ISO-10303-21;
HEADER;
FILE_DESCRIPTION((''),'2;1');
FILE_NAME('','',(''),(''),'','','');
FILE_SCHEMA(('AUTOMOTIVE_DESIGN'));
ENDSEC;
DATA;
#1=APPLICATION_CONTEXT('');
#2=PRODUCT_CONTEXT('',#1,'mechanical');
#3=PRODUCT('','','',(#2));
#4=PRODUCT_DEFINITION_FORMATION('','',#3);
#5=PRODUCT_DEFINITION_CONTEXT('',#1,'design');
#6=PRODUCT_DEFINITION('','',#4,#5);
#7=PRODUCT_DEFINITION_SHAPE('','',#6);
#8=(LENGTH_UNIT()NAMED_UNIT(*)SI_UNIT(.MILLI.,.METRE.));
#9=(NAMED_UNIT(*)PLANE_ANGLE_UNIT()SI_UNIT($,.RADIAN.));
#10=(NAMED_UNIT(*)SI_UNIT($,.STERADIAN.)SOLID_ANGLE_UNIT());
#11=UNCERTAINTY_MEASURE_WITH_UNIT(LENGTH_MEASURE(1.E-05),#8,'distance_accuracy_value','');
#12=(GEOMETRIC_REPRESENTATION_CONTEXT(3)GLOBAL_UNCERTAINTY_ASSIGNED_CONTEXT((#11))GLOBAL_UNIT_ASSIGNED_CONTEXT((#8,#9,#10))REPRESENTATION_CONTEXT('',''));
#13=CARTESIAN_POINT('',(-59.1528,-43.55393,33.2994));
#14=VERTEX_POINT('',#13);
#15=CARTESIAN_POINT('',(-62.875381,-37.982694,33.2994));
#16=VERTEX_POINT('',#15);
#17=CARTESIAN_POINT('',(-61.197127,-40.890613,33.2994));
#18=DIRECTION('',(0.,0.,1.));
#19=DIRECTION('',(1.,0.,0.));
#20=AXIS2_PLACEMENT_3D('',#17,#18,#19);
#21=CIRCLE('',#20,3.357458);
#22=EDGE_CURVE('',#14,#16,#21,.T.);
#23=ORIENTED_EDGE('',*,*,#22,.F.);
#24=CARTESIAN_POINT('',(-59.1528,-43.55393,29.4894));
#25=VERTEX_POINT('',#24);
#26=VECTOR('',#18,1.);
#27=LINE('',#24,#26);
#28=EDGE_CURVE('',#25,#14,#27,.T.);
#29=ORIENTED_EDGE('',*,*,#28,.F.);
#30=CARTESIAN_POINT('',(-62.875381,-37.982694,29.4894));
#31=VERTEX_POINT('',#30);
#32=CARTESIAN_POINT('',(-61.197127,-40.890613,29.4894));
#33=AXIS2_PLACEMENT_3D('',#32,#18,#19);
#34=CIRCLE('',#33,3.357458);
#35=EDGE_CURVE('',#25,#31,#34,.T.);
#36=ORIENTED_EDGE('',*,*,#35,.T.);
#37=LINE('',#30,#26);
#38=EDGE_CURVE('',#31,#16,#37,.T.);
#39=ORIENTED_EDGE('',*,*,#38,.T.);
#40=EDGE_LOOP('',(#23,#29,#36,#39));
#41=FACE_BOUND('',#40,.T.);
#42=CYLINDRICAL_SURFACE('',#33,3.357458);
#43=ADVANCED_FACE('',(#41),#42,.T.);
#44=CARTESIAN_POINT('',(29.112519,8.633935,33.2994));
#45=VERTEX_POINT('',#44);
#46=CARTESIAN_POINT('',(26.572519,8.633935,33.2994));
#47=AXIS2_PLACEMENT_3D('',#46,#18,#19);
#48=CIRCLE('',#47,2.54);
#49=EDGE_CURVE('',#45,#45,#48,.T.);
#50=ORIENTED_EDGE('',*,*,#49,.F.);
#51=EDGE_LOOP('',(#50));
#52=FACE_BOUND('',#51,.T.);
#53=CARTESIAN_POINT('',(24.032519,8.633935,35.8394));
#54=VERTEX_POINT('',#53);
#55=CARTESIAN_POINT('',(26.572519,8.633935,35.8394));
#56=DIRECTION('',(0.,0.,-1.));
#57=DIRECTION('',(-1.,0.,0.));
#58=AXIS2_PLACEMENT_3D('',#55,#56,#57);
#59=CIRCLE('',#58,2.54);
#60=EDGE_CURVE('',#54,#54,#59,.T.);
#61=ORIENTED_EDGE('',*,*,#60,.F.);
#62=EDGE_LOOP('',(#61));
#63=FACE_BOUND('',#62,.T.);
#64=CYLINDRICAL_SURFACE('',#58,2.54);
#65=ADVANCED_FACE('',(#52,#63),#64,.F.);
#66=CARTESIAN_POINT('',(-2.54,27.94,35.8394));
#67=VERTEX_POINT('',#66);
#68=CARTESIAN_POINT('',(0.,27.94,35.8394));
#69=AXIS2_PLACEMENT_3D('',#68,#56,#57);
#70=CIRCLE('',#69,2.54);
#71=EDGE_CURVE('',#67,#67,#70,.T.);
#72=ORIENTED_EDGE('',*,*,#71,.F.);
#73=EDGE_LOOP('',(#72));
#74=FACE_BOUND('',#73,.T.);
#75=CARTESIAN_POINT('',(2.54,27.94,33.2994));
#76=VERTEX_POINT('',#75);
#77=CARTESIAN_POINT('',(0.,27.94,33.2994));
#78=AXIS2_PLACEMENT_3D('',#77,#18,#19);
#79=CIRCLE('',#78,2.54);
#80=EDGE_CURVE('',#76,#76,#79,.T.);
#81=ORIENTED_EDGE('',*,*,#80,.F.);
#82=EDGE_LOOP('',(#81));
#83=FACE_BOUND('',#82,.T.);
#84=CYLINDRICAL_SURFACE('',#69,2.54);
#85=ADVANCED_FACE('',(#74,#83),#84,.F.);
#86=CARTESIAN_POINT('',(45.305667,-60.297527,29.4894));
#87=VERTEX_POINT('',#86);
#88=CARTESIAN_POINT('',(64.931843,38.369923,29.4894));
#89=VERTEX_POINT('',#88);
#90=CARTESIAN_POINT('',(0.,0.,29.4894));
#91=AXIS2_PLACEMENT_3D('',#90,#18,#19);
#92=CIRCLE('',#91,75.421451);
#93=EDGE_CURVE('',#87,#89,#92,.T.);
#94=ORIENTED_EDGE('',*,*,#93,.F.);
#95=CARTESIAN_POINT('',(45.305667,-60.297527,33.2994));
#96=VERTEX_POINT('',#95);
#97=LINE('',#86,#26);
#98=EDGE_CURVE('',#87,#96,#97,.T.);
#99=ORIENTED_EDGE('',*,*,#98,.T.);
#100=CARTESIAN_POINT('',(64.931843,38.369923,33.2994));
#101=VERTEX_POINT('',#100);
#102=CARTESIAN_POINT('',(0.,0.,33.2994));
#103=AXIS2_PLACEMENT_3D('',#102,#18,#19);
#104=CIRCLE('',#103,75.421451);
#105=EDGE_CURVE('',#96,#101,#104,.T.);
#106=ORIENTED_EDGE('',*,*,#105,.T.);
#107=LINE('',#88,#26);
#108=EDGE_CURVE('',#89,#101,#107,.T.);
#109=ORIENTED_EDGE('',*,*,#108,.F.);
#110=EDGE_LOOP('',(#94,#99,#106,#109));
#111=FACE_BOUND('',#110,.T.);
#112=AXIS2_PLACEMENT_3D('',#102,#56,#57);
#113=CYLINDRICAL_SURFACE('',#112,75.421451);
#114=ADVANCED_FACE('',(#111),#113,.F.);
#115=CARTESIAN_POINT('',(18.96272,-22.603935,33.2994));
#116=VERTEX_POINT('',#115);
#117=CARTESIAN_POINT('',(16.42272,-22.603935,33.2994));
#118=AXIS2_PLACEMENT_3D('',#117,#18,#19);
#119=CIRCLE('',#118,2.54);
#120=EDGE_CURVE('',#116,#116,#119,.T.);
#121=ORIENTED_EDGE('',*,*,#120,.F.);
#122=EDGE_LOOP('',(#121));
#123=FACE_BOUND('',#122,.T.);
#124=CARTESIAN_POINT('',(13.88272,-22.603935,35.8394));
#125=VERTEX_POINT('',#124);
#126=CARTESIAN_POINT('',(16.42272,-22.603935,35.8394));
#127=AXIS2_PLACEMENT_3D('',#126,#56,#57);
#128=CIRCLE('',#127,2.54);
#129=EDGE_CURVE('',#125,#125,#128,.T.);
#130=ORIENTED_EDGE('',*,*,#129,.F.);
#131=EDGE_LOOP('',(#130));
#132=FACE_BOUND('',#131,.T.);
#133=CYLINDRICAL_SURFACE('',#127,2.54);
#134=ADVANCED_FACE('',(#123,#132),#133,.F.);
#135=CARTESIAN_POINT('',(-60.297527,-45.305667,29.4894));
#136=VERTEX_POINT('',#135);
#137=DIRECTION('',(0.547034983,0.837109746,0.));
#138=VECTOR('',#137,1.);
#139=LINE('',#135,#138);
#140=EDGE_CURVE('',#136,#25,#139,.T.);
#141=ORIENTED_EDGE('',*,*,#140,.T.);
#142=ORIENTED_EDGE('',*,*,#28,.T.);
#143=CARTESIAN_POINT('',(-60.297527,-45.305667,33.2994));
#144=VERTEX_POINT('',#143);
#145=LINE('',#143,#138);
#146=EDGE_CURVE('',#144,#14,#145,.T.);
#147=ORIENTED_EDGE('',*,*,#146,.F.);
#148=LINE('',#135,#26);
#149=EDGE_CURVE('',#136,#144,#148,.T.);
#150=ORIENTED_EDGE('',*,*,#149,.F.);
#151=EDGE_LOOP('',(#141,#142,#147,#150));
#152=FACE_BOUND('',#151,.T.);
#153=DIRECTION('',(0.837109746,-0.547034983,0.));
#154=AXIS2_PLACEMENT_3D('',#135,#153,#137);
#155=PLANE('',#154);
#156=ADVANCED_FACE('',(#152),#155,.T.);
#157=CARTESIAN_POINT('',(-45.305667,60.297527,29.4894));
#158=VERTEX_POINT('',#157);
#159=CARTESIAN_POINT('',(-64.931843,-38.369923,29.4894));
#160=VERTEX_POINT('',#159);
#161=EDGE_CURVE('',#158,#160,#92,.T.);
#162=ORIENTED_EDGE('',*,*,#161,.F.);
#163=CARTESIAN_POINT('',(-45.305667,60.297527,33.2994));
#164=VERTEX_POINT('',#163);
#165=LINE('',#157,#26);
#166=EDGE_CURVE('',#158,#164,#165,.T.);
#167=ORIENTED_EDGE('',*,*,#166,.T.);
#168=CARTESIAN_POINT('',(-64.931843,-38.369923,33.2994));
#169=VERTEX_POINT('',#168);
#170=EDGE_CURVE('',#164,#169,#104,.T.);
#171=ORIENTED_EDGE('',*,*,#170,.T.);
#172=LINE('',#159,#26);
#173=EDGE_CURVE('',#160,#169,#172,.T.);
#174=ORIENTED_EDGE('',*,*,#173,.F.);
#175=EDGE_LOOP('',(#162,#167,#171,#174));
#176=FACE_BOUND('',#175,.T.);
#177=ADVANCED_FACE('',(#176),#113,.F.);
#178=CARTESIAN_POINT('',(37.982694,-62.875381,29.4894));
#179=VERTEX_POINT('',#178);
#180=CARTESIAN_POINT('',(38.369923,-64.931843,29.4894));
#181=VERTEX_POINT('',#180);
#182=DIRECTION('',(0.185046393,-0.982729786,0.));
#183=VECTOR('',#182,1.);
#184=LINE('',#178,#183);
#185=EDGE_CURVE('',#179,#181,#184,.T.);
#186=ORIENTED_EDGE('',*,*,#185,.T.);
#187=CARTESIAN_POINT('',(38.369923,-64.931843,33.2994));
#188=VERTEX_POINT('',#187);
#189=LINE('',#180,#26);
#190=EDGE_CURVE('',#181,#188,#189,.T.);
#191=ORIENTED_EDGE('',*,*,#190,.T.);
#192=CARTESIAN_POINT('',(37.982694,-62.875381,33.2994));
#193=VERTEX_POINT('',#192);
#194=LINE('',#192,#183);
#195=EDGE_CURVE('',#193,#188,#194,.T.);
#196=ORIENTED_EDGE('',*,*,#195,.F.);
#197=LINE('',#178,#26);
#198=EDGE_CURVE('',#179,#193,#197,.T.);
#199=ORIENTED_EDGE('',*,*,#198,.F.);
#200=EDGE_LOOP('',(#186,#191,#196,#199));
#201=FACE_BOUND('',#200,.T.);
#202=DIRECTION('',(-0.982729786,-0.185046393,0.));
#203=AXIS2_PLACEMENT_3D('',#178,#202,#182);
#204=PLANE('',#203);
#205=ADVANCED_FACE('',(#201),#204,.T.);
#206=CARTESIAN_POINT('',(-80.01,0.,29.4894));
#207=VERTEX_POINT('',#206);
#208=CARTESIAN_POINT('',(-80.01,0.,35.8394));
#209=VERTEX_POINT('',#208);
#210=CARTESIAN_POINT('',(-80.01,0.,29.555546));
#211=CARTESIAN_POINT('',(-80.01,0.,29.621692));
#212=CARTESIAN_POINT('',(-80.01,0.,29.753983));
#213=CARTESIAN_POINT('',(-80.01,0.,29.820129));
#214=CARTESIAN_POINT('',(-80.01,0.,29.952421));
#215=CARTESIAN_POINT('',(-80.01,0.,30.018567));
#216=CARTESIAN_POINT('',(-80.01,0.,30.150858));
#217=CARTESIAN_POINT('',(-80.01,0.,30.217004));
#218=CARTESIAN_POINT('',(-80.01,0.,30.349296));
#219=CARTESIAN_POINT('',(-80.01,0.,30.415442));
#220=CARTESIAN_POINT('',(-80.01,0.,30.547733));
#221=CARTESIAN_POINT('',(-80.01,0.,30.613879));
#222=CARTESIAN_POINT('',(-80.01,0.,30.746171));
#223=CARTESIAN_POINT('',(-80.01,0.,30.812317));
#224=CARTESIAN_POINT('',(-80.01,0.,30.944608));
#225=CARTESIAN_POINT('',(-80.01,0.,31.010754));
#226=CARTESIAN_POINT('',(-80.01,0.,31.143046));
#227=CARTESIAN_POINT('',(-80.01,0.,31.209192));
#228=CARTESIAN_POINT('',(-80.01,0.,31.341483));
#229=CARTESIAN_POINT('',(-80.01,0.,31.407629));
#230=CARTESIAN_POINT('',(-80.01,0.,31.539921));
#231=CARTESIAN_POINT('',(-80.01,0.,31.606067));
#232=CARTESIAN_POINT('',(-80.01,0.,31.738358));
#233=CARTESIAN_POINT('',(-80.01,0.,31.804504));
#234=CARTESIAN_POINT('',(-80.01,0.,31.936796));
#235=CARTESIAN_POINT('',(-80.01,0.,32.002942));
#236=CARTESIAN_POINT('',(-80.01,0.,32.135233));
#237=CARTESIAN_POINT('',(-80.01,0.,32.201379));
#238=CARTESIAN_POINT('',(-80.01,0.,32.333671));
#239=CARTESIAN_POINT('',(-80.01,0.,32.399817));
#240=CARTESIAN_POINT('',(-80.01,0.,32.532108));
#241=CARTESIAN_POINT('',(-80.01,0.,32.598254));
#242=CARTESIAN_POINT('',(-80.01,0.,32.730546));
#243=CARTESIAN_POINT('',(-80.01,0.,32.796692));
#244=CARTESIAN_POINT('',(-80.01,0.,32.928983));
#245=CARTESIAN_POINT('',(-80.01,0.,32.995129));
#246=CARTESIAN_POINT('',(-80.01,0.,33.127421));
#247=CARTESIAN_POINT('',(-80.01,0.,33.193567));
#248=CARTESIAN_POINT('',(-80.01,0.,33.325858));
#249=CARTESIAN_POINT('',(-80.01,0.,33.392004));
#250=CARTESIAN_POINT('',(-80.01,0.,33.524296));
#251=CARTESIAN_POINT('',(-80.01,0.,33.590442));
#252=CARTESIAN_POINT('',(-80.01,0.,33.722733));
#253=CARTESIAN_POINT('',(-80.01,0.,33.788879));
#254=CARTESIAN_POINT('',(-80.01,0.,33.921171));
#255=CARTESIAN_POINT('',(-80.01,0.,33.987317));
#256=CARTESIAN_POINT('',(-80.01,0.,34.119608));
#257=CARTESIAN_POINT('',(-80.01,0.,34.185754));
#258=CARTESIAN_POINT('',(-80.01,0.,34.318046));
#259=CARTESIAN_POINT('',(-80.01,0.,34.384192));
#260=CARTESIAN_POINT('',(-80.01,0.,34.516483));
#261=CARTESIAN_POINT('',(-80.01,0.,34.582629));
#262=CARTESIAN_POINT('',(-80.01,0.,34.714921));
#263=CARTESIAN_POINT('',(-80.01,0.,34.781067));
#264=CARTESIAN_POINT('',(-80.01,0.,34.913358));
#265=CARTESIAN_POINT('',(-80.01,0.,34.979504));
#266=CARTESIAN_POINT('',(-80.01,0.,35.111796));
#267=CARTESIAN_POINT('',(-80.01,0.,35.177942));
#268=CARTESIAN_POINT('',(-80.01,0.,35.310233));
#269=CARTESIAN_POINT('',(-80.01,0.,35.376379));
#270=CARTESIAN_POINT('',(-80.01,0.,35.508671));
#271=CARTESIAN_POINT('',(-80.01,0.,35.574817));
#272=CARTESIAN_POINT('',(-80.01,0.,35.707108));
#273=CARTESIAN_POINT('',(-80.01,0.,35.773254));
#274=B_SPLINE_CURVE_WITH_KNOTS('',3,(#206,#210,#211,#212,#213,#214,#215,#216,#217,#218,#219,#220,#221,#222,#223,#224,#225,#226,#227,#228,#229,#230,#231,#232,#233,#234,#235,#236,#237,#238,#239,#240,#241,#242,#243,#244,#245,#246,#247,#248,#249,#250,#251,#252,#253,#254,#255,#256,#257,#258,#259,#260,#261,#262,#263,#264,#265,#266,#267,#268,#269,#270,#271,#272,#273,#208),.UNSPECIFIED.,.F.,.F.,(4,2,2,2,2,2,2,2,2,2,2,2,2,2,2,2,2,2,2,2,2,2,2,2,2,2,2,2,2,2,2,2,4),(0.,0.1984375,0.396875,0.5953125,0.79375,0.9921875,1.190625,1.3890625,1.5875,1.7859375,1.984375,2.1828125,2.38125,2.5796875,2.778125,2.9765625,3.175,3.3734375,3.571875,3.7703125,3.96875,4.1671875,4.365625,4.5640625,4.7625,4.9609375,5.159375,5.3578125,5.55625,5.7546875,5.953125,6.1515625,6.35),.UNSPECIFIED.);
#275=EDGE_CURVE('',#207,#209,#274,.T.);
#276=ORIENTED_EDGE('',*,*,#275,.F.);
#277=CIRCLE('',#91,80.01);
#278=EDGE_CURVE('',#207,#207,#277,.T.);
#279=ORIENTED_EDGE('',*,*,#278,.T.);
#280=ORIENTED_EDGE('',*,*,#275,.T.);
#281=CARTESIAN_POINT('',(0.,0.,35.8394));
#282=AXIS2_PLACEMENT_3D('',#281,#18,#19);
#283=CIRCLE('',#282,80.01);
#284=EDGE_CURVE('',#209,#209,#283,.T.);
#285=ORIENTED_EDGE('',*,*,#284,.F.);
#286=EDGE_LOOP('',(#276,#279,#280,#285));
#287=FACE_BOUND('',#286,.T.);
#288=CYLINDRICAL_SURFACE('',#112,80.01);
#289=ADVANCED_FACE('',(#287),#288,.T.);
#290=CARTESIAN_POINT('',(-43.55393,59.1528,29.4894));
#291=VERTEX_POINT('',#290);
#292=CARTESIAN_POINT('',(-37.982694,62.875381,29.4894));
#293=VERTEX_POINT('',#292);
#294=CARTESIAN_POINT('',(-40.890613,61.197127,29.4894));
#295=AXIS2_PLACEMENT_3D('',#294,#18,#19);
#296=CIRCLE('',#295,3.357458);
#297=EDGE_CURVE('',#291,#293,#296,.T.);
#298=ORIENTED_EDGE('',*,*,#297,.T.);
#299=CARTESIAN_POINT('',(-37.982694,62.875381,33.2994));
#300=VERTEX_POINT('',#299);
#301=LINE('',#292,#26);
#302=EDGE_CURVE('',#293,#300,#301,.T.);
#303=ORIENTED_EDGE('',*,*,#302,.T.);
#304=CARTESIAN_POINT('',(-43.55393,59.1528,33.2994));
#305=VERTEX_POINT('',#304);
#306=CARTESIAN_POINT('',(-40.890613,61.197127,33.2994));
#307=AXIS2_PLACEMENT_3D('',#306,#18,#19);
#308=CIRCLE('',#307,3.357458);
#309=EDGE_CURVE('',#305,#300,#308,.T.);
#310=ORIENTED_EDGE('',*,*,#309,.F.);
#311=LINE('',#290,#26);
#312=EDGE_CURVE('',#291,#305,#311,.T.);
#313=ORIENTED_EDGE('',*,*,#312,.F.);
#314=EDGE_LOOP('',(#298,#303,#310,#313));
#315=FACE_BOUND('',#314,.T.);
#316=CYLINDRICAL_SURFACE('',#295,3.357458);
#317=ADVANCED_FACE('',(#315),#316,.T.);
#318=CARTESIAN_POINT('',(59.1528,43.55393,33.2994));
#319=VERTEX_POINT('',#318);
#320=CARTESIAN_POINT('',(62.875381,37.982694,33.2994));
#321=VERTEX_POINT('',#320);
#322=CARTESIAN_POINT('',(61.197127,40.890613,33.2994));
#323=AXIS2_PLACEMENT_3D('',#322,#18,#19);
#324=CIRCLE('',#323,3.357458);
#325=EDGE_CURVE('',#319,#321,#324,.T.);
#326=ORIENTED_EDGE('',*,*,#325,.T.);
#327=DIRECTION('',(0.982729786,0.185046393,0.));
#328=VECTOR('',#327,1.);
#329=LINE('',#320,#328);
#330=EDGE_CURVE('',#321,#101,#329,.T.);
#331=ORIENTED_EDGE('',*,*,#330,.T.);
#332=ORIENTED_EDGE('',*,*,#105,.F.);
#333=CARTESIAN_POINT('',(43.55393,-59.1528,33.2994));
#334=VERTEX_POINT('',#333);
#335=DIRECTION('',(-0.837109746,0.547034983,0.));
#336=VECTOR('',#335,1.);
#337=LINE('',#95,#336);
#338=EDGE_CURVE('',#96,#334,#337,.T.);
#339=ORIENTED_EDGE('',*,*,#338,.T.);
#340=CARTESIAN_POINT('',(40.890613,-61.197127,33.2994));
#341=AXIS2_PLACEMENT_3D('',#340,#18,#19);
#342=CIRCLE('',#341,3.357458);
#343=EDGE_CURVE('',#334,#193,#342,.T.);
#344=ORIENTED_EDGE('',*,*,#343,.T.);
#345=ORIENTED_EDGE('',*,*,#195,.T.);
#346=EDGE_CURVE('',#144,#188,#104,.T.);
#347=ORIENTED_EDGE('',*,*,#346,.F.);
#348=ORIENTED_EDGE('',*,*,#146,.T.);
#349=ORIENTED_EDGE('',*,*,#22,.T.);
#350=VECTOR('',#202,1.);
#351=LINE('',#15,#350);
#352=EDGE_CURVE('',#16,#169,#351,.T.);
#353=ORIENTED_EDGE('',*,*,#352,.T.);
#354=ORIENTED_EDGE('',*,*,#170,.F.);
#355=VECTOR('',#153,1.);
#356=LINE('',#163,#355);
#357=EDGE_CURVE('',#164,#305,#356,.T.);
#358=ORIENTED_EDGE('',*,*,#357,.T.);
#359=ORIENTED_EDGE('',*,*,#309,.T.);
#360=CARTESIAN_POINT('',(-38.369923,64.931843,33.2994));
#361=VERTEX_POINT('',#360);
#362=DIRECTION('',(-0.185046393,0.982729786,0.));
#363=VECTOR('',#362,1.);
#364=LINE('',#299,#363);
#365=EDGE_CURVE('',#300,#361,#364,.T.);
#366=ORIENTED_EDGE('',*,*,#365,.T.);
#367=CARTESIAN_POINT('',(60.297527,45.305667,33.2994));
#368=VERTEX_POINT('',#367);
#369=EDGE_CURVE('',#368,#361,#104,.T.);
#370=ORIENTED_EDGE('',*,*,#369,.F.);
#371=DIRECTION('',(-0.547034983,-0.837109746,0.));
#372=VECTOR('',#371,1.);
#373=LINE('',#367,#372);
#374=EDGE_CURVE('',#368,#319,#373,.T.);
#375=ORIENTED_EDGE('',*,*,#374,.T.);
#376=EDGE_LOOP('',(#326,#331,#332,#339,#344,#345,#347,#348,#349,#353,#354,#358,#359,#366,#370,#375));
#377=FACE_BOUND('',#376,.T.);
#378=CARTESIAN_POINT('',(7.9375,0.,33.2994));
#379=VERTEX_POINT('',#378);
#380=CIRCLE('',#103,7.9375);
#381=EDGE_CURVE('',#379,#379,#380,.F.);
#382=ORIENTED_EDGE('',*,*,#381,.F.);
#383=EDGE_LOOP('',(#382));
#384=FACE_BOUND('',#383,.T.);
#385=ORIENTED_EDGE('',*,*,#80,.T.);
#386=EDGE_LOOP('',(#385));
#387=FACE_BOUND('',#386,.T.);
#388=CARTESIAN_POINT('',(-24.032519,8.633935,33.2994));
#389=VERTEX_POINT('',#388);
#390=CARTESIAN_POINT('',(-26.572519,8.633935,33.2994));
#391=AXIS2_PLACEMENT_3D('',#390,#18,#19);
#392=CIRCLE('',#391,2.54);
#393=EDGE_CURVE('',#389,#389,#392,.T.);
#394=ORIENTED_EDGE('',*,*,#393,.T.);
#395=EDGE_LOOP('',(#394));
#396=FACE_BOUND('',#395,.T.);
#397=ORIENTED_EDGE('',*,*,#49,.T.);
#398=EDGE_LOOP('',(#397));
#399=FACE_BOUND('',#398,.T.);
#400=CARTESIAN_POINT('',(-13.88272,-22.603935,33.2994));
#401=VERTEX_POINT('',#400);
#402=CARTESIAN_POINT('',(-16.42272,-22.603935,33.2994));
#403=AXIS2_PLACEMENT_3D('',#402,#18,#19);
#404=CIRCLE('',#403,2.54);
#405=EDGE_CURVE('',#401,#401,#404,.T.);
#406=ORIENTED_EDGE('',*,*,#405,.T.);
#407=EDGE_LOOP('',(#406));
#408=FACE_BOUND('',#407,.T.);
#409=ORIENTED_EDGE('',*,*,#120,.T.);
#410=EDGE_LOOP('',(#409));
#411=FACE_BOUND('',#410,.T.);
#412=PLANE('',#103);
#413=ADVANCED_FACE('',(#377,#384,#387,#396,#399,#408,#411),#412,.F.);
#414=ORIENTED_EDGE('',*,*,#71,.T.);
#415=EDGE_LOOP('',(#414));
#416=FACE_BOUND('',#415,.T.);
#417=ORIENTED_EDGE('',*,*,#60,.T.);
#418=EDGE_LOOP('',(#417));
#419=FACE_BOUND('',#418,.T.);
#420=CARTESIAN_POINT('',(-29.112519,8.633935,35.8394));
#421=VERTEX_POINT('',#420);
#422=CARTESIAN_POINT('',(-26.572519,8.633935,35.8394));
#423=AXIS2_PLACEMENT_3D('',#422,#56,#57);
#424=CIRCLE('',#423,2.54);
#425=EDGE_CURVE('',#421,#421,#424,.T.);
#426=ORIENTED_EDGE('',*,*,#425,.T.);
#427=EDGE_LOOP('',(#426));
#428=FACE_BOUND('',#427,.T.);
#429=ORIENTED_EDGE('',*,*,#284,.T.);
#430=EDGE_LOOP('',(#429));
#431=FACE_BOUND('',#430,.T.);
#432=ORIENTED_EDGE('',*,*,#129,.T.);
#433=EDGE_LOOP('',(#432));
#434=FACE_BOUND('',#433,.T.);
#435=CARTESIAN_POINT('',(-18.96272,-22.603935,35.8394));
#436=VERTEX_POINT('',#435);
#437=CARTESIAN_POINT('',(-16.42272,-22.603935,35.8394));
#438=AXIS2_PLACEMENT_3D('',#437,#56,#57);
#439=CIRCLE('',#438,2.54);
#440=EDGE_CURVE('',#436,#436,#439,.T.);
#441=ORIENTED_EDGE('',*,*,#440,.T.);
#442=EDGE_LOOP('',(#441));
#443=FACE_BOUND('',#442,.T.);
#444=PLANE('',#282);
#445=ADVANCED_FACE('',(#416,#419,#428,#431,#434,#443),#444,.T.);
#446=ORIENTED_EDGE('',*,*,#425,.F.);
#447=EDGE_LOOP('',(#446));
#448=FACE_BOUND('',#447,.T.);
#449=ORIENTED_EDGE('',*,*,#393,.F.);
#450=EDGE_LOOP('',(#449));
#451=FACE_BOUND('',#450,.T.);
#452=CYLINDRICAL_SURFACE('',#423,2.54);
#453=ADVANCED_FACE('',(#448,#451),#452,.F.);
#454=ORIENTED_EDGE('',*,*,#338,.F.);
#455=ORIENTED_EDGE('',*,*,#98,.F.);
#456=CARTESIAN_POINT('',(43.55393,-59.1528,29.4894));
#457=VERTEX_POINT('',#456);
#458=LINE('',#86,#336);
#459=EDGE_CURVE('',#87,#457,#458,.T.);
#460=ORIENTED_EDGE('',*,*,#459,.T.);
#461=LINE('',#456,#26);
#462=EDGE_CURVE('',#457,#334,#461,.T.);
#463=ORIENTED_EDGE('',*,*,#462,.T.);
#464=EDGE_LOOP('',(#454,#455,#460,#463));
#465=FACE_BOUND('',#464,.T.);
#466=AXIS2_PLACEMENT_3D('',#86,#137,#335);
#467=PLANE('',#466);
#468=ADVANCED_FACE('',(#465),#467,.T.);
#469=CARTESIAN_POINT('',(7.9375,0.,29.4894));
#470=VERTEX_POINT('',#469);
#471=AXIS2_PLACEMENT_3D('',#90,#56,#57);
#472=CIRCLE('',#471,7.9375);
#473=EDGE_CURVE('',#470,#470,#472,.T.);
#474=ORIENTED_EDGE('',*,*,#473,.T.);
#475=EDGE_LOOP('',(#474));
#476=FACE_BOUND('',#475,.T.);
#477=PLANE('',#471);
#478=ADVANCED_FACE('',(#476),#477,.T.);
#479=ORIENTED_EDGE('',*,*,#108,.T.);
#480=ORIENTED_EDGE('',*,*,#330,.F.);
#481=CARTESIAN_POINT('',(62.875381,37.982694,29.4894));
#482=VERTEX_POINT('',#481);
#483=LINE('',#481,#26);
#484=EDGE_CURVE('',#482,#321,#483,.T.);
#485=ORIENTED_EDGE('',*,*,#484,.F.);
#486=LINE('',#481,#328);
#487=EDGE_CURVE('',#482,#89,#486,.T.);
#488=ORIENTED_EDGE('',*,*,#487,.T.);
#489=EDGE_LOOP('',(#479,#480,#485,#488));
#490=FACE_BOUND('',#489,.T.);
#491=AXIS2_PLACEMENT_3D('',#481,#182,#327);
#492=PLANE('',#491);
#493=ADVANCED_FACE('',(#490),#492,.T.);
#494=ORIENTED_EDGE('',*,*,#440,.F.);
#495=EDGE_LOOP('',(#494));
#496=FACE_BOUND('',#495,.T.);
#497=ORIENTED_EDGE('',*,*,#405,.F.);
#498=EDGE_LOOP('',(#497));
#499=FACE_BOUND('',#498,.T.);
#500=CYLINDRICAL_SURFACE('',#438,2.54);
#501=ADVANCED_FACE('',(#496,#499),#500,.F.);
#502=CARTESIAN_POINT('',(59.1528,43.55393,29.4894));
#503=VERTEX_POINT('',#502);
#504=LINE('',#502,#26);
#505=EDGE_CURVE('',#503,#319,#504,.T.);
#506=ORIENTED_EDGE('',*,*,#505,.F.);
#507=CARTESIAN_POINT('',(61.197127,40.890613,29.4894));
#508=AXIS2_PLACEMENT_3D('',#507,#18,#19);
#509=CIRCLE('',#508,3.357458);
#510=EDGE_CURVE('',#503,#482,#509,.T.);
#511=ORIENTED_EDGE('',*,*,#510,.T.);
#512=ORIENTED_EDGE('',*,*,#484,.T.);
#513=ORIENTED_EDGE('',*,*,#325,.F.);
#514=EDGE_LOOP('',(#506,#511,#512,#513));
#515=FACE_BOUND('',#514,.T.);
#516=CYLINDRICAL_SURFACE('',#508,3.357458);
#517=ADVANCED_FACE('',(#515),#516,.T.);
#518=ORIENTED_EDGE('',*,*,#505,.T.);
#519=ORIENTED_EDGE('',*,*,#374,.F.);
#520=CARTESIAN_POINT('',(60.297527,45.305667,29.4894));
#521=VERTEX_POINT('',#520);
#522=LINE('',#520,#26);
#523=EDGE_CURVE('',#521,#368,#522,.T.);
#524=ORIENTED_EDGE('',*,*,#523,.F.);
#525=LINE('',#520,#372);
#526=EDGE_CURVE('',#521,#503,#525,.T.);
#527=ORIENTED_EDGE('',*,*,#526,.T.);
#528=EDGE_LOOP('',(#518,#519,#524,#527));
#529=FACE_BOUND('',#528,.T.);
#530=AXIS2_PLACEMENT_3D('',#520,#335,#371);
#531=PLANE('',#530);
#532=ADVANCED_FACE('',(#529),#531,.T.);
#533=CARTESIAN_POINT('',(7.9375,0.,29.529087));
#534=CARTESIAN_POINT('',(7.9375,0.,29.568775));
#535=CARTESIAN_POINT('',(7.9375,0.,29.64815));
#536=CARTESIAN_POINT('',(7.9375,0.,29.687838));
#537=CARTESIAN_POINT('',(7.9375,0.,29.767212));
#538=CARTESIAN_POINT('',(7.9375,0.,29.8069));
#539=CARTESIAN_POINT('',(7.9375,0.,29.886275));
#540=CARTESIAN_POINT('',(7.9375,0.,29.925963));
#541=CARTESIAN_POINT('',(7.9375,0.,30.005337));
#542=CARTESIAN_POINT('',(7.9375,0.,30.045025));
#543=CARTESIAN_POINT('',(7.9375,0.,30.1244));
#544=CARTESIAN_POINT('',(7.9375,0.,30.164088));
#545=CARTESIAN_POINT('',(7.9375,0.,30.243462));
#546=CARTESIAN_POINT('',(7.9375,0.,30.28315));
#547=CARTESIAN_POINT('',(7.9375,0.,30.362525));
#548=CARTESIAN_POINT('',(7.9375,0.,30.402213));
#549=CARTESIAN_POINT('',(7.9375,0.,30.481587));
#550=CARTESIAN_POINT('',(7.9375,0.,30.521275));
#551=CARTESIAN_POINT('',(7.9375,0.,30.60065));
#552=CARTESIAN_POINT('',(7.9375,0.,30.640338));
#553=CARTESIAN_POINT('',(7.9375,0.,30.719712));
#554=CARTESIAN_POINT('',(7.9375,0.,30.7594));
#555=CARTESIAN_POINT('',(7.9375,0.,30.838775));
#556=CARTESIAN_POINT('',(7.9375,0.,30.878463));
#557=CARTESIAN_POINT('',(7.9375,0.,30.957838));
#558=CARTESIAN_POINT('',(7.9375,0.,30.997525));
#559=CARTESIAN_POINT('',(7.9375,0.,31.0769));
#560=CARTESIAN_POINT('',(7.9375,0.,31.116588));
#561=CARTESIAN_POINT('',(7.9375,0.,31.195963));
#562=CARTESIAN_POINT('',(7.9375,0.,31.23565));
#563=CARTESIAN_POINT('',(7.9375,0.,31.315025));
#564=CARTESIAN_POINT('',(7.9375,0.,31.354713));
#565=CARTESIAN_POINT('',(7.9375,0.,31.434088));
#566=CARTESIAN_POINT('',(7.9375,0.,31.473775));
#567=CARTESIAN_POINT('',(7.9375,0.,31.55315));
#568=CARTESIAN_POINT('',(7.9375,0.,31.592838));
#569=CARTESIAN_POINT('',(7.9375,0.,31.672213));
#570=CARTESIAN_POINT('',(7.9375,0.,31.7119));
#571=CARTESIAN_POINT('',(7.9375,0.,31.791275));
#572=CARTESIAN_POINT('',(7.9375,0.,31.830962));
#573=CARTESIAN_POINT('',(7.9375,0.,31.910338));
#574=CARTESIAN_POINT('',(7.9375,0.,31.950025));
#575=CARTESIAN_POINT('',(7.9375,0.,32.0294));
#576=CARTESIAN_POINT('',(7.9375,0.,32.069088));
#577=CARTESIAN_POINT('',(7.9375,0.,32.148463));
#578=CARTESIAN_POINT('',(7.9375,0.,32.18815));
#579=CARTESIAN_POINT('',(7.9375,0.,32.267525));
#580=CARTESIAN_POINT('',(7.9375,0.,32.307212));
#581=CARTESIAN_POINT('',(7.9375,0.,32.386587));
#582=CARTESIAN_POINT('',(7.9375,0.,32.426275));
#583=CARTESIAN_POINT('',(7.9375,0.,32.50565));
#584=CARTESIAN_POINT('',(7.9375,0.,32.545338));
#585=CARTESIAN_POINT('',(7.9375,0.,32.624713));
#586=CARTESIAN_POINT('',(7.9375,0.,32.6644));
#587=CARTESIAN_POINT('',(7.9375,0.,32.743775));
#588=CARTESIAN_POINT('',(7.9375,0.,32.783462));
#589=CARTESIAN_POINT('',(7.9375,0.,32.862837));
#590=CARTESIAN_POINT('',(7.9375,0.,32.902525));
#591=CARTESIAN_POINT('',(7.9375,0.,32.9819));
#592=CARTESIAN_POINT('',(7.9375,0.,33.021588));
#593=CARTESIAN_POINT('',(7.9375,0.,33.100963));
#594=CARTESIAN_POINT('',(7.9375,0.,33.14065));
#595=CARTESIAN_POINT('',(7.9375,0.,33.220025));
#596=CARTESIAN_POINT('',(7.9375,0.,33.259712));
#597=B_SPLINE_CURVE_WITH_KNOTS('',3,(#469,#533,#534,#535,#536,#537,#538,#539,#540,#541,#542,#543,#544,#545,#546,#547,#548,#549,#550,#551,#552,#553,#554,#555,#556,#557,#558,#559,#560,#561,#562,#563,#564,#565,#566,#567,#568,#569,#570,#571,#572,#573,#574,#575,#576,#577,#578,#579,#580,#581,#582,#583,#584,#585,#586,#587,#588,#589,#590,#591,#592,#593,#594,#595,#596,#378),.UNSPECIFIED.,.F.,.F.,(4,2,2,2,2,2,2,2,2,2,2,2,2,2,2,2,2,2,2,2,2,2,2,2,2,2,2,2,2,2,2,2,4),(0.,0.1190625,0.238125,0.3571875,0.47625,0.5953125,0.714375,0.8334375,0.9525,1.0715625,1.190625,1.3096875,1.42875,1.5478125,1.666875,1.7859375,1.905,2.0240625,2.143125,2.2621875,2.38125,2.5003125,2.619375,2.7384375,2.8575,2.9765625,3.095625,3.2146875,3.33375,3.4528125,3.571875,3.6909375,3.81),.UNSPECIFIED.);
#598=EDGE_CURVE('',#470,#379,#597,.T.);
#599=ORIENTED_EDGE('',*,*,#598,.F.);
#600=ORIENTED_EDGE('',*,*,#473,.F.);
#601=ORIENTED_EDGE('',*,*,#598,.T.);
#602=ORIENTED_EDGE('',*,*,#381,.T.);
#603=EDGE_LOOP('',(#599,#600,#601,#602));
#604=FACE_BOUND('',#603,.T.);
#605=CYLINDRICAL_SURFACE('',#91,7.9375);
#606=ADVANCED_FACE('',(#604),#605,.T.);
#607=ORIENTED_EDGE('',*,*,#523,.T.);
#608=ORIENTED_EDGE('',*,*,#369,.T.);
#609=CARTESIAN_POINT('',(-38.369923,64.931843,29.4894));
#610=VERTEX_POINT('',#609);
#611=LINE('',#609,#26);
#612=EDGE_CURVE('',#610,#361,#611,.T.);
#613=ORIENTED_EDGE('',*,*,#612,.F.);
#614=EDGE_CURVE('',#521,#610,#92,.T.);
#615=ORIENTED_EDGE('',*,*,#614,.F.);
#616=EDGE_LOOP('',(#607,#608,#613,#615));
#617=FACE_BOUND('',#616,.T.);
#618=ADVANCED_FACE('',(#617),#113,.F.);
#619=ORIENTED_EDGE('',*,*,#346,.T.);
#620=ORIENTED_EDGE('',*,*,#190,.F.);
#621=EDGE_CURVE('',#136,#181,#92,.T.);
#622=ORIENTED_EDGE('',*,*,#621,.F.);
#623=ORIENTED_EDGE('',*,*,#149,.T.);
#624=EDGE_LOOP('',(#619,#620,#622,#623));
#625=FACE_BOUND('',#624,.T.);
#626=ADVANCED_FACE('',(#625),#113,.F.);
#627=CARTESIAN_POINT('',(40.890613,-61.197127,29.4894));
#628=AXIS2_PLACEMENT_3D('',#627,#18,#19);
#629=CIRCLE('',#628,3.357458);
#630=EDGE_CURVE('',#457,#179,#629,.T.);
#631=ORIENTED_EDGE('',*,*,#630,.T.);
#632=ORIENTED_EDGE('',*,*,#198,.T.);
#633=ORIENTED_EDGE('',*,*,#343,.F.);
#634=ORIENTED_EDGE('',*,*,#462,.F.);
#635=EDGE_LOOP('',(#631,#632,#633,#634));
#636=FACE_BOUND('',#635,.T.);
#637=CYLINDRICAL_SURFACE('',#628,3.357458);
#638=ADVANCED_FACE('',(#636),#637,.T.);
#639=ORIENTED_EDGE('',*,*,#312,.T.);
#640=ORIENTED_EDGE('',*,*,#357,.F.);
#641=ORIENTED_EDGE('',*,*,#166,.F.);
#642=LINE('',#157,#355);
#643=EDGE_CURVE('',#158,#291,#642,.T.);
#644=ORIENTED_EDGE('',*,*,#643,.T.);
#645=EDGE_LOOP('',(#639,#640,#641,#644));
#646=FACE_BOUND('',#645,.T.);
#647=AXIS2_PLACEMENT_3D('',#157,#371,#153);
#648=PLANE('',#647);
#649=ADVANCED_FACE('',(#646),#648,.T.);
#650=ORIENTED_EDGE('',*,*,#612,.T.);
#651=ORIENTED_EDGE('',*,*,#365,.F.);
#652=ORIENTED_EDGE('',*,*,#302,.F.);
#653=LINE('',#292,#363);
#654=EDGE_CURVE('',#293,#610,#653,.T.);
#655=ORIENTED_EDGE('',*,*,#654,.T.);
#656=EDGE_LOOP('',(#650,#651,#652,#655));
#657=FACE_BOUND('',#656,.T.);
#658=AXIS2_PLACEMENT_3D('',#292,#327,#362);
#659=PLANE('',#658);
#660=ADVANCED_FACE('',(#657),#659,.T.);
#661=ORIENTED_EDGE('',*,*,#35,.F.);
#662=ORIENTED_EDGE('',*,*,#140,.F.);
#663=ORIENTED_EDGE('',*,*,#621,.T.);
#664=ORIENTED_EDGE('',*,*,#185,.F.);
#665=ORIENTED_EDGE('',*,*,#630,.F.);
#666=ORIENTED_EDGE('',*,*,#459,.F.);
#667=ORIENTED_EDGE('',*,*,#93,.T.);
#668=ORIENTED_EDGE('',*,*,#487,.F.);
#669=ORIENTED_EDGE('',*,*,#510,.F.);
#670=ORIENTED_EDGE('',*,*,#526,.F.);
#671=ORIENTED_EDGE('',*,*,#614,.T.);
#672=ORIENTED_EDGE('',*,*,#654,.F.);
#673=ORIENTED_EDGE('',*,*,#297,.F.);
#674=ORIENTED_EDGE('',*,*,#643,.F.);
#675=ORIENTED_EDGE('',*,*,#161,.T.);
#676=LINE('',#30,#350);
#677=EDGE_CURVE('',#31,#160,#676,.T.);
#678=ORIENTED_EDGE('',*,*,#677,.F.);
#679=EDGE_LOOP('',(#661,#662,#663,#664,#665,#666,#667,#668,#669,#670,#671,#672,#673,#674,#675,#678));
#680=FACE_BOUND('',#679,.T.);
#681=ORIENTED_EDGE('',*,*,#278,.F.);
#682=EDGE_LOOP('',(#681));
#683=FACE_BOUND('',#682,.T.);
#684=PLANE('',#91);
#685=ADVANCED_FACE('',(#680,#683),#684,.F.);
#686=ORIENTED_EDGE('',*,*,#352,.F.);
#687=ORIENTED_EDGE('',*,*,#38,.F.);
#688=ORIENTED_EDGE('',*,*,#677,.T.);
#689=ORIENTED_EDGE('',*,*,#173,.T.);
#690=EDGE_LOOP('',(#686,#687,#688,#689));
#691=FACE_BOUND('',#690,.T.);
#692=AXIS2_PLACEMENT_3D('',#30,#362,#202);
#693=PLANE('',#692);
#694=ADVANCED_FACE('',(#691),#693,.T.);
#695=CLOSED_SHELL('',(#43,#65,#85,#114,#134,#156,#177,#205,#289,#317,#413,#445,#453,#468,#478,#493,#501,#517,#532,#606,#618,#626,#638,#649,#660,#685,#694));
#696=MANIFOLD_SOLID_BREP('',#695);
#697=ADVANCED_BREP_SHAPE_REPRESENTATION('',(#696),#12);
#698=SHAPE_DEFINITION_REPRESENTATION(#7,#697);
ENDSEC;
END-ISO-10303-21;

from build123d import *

# Parameters (mm, degrees)
SKETCH1_R           = 7.9375
BOSS_EXTRUDE2_DEPTH = 4.0894
SKETCH4_R           = 80.01
SKETCH4_R_2         = 75.421450769
BOSS_EXTRUDE3_DEPTH = 3.81
BOSS_EXTRUDE5_START = -3.81
BOSS_EXTRUDE5_DEPTH = 3.81
SKETCH6_R           = 80.01
BOSS_EXTRUDE6_DEPTH = 2.54
BOSS_EXTRUDE7_START = 3.81
SKETCH8_R           = 7.9375
BOSS_EXTRUDE7_DEPTH = 3.81
SKETCH9_R           = 2.54
CUT_EXTRUDE2_DEPTH  = 117.930855287


with BuildPart() as part:
    # Sketch1 → Boss-Extrude2 (new body)
    with BuildSketch(Plane.XY):
        with BuildLine():
            Line((-0.762, 75.421450769), (0.762, 75.421450769))
            Line((0.762, 75.421450769), (1.456984931, 73.511995363))
            ThreePointArc((1.456984931, 73.511995363), (2.339997211, 71.173530048), (4.594157789, 70.093302846))
            ThreePointArc((4.594157789, 70.093302846), (6.970031654, 70.870061558), (8.150720614, 73.073264748))
            Line((8.150720614, 73.073264748), (9.088993796, 74.875670761))
            Line((9.088993796, 74.875670761), (10.599955765, 74.676748844))
            Line((10.599955765, 74.676748844), (11.03976106, 72.692915357))
            ThreePointArc((11.03976106, 72.692915357), (11.609988074, 70.259199706), (13.703866053, 68.893987001))
            ThreePointArc((13.703866053, 68.893987001), (16.160801344, 69.353986665), (17.61896507, 71.384230312))
            Line((17.61896507, 71.384230312), (18.784472389, 73.048747266))
            Line((18.784472389, 73.048747266), (20.256543348, 72.654307042))
            Line((20.256543348, 72.654307042), (20.433643817, 70.630039415))
            ThreePointArc((20.433643817, 70.630039415), (20.681328823, 68.142714978), (22.579097369, 66.515875937))
            ThreePointArc((22.579097369, 66.515875937), (25.075055243, 66.651245832), (26.785744149, 68.473791905))
            Line((26.785744149, 68.473791905), (28.15854345, 69.971939453))
            Line((28.15854345, 69.971939453), (29.566535858, 69.388729902))
            Line((29.566535858, 69.388729902), (29.477901263, 67.358663916))
            ThreePointArc((29.477901263, 67.358663916), (29.398806302, 64.860289504), (31.067994069, 62.999659794))
            ThreePointArc((31.067994069, 62.999659794), (33.560267995, 62.808083704), (35.494211718, 64.391747933))
            Line((35.494211718, 64.391747933), (37.050814027, 65.697892356))
            Line((37.050814027, 65.697892356), (38.370636742, 64.935892356))
            Line((38.370636742, 64.935892356), (38.017783645, 62.934763002))
            ThreePointArc((38.017783645, 62.934763002), (37.613262053, 60.468086493), (39.025308777, 58.405502006))
            ThreePointArc((39.025308777, 58.405502006), (41.471255256, 57.89025785), (43.595363485, 59.207943302))
            Line((43.595363485, 59.207943302), (45.309134903, 60.299736106))
            Line((45.309134903, 60.299736106), (46.518205393, 59.371983688))
            Line((46.518205393, 59.371983688), (45.907171209, 57.434030844))
            ThreePointArc((45.907171209, 57.434030844), (45.184144463, 55.041257758), (46.314889632, 52.812009885))
            ThreePointArc((46.314889632, 52.812009885), (48.672657842, 51.981913634), (50.950586495, 53.011074345))
            Line((50.950586495, 53.011074345), (52.792203918, 53.869834653))
            Line((52.792203918, 53.869834653), (53.869834653, 52.792203918))
            Line((53.869834653, 52.792203918), (53.011074345, 50.950586495))
            ThreePointArc((53.011074345, 50.950586495), (51.981913634, 48.672657842), (52.812009885, 46.314889632))
            ThreePointArc((52.812009885, 46.314889632), (55.041257758, 45.184144463), (57.434030844, 45.907171209))
            Line((57.434030844, 45.907171209), (59.371983688, 46.518205393))
            Line((59.371983688, 46.518205393), (60.299736106, 45.309134903))
            Line((60.299736106, 45.309134903), (59.207943302, 43.595363485))
            ThreePointArc((59.207943302, 43.595363485), (57.89025785, 41.471255256), (58.405502006, 39.025308777))
            ThreePointArc((58.405502006, 39.025308777), (60.468086493, 37.613262053), (62.934763002, 38.017783645))
            Line((62.934763002, 38.017783645), (64.935892356, 38.370636742))
            Line((64.935892356, 38.370636742), (65.697892356, 37.050814027))
            Line((65.697892356, 37.050814027), (64.391747933, 35.494211718))
            ThreePointArc((64.391747933, 35.494211718), (62.808083704, 33.560267995), (62.999659794, 31.067994069))
            ThreePointArc((62.999659794, 31.067994069), (64.860289504, 29.398806302), (67.358663916, 29.477901263))
            Line((67.358663916, 29.477901263), (69.388729902, 29.566535858))
            Line((69.388729902, 29.566535858), (69.971939453, 28.15854345))
            Line((69.971939453, 28.15854345), (68.473791905, 26.785744149))
            ThreePointArc((68.473791905, 26.785744149), (66.651245832, 25.075055243), (66.515875937, 22.579097369))
            ThreePointArc((66.515875937, 22.579097369), (68.142714978, 20.681328823), (70.630039415, 20.433643817))
            Line((70.630039415, 20.433643817), (72.654307042, 20.256543348))
            Line((72.654307042, 20.256543348), (73.048747266, 18.784472389))
            Line((73.048747266, 18.784472389), (71.384230312, 17.61896507))
            ThreePointArc((71.384230312, 17.61896507), (69.353986665, 16.160801344), (68.893987001, 13.703866053))
            ThreePointArc((68.893987001, 13.703866053), (70.259199706, 11.609988074), (72.692915357, 11.03976106))
            Line((72.692915357, 11.03976106), (74.676748844, 10.599955765))
            Line((74.676748844, 10.599955765), (74.875670761, 9.088993796))
            Line((74.875670761, 9.088993796), (73.073264748, 8.150720614))
            ThreePointArc((73.073264748, 8.150720614), (70.870061558, 6.970031654), (70.093302846, 4.594157789))
            ThreePointArc((70.093302846, 4.594157789), (71.173530048, 2.339997211), (73.511995363, 1.456984931))
            Line((73.511995363, 1.456984931), (75.421450769, 0.762))
            Line((75.421450769, 0.762), (75.421450769, -0.762))
            Line((75.421450769, -0.762), (73.511995363, -1.456984931))
            ThreePointArc((73.511995363, -1.456984931), (71.173530048, -2.339997211), (70.093302846, -4.594157789))
            ThreePointArc((70.093302846, -4.594157789), (70.870061558, -6.970031654), (73.073264748, -8.150720614))
            Line((73.073264748, -8.150720614), (74.875670761, -9.088993796))
            Line((74.875670761, -9.088993796), (74.676748844, -10.599955765))
            Line((74.676748844, -10.599955765), (72.692915357, -11.03976106))
            ThreePointArc((72.692915357, -11.03976106), (70.259199706, -11.609988074), (68.893987001, -13.703866053))
            ThreePointArc((68.893987001, -13.703866053), (69.353986665, -16.160801344), (71.384230312, -17.61896507))
            Line((71.384230312, -17.61896507), (73.048747266, -18.784472389))
            Line((73.048747266, -18.784472389), (72.654307042, -20.256543348))
            Line((72.654307042, -20.256543348), (70.630039415, -20.433643817))
            ThreePointArc((70.630039415, -20.433643817), (68.142714978, -20.681328823), (66.515875937, -22.579097369))
            ThreePointArc((66.515875937, -22.579097369), (66.651245832, -25.075055243), (68.473791905, -26.785744149))
            Line((68.473791905, -26.785744149), (69.971939453, -28.15854345))
            Line((69.971939453, -28.15854345), (69.388729902, -29.566535858))
            Line((69.388729902, -29.566535858), (67.358663916, -29.477901263))
            ThreePointArc((67.358663916, -29.477901263), (64.860289504, -29.398806302), (62.999659794, -31.067994069))
            ThreePointArc((62.999659794, -31.067994069), (62.808083704, -33.560267995), (64.391747933, -35.494211718))
            Line((64.391747933, -35.494211718), (65.697892356, -37.050814027))
            Line((65.697892356, -37.050814027), (64.935892356, -38.370636742))
            Line((64.935892356, -38.370636742), (62.934763002, -38.017783645))
            ThreePointArc((62.934763002, -38.017783645), (60.468086493, -37.613262053), (58.405502006, -39.025308777))
            ThreePointArc((58.405502006, -39.025308777), (57.89025785, -41.471255256), (59.207943302, -43.595363485))
            Line((59.207943302, -43.595363485), (60.299736106, -45.309134903))
            Line((60.299736106, -45.309134903), (59.371983688, -46.518205393))
            Line((59.371983688, -46.518205393), (57.434030844, -45.907171209))
            ThreePointArc((57.434030844, -45.907171209), (55.041257758, -45.184144463), (52.812009885, -46.314889632))
            ThreePointArc((52.812009885, -46.314889632), (51.981913634, -48.672657842), (53.011074345, -50.950586495))
            Line((53.011074345, -50.950586495), (53.869834653, -52.792203918))
            Line((53.869834653, -52.792203918), (52.792203918, -53.869834653))
            Line((52.792203918, -53.869834653), (50.950586495, -53.011074345))
            ThreePointArc((50.950586495, -53.011074345), (48.672657842, -51.981913634), (46.314889632, -52.812009885))
            ThreePointArc((46.314889632, -52.812009885), (45.184144463, -55.041257758), (45.907171209, -57.434030844))
            Line((45.907171209, -57.434030844), (46.518205393, -59.371983688))
            Line((46.518205393, -59.371983688), (45.309134903, -60.299736106))
            Line((45.309134903, -60.299736106), (43.595363485, -59.207943302))
            ThreePointArc((43.595363485, -59.207943302), (41.471255256, -57.89025785), (39.025308777, -58.405502006))
            ThreePointArc((39.025308777, -58.405502006), (37.613262053, -60.468086493), (38.017783645, -62.934763002))
            Line((38.017783645, -62.934763002), (38.370636742, -64.935892356))
            Line((38.370636742, -64.935892356), (37.050814027, -65.697892356))
            Line((37.050814027, -65.697892356), (35.494211718, -64.391747933))
            ThreePointArc((35.494211718, -64.391747933), (33.560267995, -62.808083704), (31.067994069, -62.999659794))
            ThreePointArc((31.067994069, -62.999659794), (29.398806302, -64.860289504), (29.477901263, -67.358663916))
            Line((29.477901263, -67.358663916), (29.566535858, -69.388729902))
            Line((29.566535858, -69.388729902), (28.15854345, -69.971939453))
            Line((28.15854345, -69.971939453), (26.785744149, -68.473791905))
            ThreePointArc((26.785744149, -68.473791905), (25.075055243, -66.651245832), (22.579097369, -66.515875937))
            ThreePointArc((22.579097369, -66.515875937), (20.681328823, -68.142714978), (20.433643817, -70.630039415))
            Line((20.433643817, -70.630039415), (20.256543348, -72.654307042))
            Line((20.256543348, -72.654307042), (18.784472389, -73.048747266))
            Line((18.784472389, -73.048747266), (17.61896507, -71.384230312))
            ThreePointArc((17.61896507, -71.384230312), (16.160801344, -69.353986665), (13.703866053, -68.893987001))
            ThreePointArc((13.703866053, -68.893987001), (11.609988074, -70.259199706), (11.03976106, -72.692915357))
            Line((11.03976106, -72.692915357), (10.599955765, -74.676748844))
            Line((10.599955765, -74.676748844), (9.088993796, -74.875670761))
            Line((9.088993796, -74.875670761), (8.150720614, -73.073264748))
            ThreePointArc((8.150720614, -73.073264748), (6.970031654, -70.870061558), (4.594157789, -70.093302846))
            ThreePointArc((4.594157789, -70.093302846), (2.339997211, -71.173530048), (1.456984931, -73.511995363))
            Line((1.456984931, -73.511995363), (0.762, -75.421450769))
            Line((0.762, -75.421450769), (-0.762, -75.421450769))
            Line((-0.762, -75.421450769), (-1.456984931, -73.511995363))
            ThreePointArc((-1.456984931, -73.511995363), (-2.339997211, -71.173530048), (-4.594157789, -70.093302846))
            ThreePointArc((-4.594157789, -70.093302846), (-6.970031654, -70.870061558), (-8.150720614, -73.073264748))
            Line((-8.150720614, -73.073264748), (-9.088993796, -74.875670761))
            Line((-9.088993796, -74.875670761), (-10.599955765, -74.676748844))
            Line((-10.599955765, -74.676748844), (-11.03976106, -72.692915357))
            ThreePointArc((-11.03976106, -72.692915357), (-11.609988074, -70.259199706), (-13.703866053, -68.893987001))
            ThreePointArc((-13.703866053, -68.893987001), (-16.160801344, -69.353986665), (-17.61896507, -71.384230312))
            Line((-17.61896507, -71.384230312), (-18.784472389, -73.048747266))
            Line((-18.784472389, -73.048747266), (-20.256543348, -72.654307042))
            Line((-20.256543348, -72.654307042), (-20.433643817, -70.630039415))
            ThreePointArc((-20.433643817, -70.630039415), (-20.681328823, -68.142714978), (-22.579097369, -66.515875937))
            ThreePointArc((-22.579097369, -66.515875937), (-25.075055243, -66.651245832), (-26.785744149, -68.473791905))
            Line((-26.785744149, -68.473791905), (-28.15854345, -69.971939453))
            Line((-28.15854345, -69.971939453), (-29.566535858, -69.388729902))
            Line((-29.566535858, -69.388729902), (-29.477901263, -67.358663916))
            ThreePointArc((-29.477901263, -67.358663916), (-29.398806302, -64.860289504), (-31.067994069, -62.999659794))
            ThreePointArc((-31.067994069, -62.999659794), (-33.560267995, -62.808083704), (-35.494211718, -64.391747933))
            Line((-35.494211718, -64.391747933), (-37.050814027, -65.697892356))
            Line((-37.050814027, -65.697892356), (-38.370636742, -64.935892356))
            Line((-38.370636742, -64.935892356), (-38.017783645, -62.934763002))
            ThreePointArc((-38.017783645, -62.934763002), (-37.613262053, -60.468086493), (-39.025308777, -58.405502006))
            ThreePointArc((-39.025308777, -58.405502006), (-41.471255256, -57.89025785), (-43.595363485, -59.207943302))
            Line((-43.595363485, -59.207943302), (-45.309134903, -60.299736106))
            Line((-45.309134903, -60.299736106), (-46.518205393, -59.371983688))
            Line((-46.518205393, -59.371983688), (-45.907171209, -57.434030844))
            ThreePointArc((-45.907171209, -57.434030844), (-45.184144463, -55.041257758), (-46.314889632, -52.812009885))
            ThreePointArc((-46.314889632, -52.812009885), (-48.672657842, -51.981913634), (-50.950586495, -53.011074345))
            Line((-50.950586495, -53.011074345), (-52.792203918, -53.869834653))
            Line((-52.792203918, -53.869834653), (-53.869834653, -52.792203918))
            Line((-53.869834653, -52.792203918), (-53.011074345, -50.950586495))
            ThreePointArc((-53.011074345, -50.950586495), (-51.981913634, -48.672657842), (-52.812009885, -46.314889632))
            ThreePointArc((-52.812009885, -46.314889632), (-55.041257758, -45.184144463), (-57.434030844, -45.907171209))
            Line((-57.434030844, -45.907171209), (-59.371983688, -46.518205393))
            Line((-59.371983688, -46.518205393), (-60.299736106, -45.309134903))
            Line((-60.299736106, -45.309134903), (-59.207943302, -43.595363485))
            ThreePointArc((-59.207943302, -43.595363485), (-57.89025785, -41.471255256), (-58.405502006, -39.025308777))
            ThreePointArc((-58.405502006, -39.025308777), (-60.468086493, -37.613262053), (-62.934763002, -38.017783645))
            Line((-62.934763002, -38.017783645), (-64.935892356, -38.370636742))
            Line((-64.935892356, -38.370636742), (-65.697892356, -37.050814027))
            Line((-65.697892356, -37.050814027), (-64.391747933, -35.494211718))
            ThreePointArc((-64.391747933, -35.494211718), (-62.808083704, -33.560267995), (-62.999659794, -31.067994069))
            ThreePointArc((-62.999659794, -31.067994069), (-64.860289504, -29.398806302), (-67.358663916, -29.477901263))
            Line((-67.358663916, -29.477901263), (-69.388729902, -29.566535858))
            Line((-69.388729902, -29.566535858), (-69.971939453, -28.15854345))
            Line((-69.971939453, -28.15854345), (-68.473791905, -26.785744149))
            ThreePointArc((-68.473791905, -26.785744149), (-66.651245832, -25.075055243), (-66.515875937, -22.579097369))
            ThreePointArc((-66.515875937, -22.579097369), (-68.142714978, -20.681328823), (-70.630039415, -20.433643817))
            Line((-70.630039415, -20.433643817), (-72.654307042, -20.256543348))
            Line((-72.654307042, -20.256543348), (-73.048747266, -18.784472389))
            Line((-73.048747266, -18.784472389), (-71.384230312, -17.61896507))
            ThreePointArc((-71.384230312, -17.61896507), (-69.353986665, -16.160801344), (-68.893987001, -13.703866053))
            ThreePointArc((-68.893987001, -13.703866053), (-70.259199706, -11.609988074), (-72.692915357, -11.03976106))
            Line((-72.692915357, -11.03976106), (-74.676748844, -10.599955765))
            Line((-74.676748844, -10.599955765), (-74.875670761, -9.088993796))
            Line((-74.875670761, -9.088993796), (-73.073264748, -8.150720614))
            ThreePointArc((-73.073264748, -8.150720614), (-70.870061558, -6.970031654), (-70.093302846, -4.594157789))
            ThreePointArc((-70.093302846, -4.594157789), (-71.173530048, -2.339997211), (-73.511995363, -1.456984931))
            Line((-73.511995363, -1.456984931), (-75.421450769, -0.762))
            Line((-75.421450769, -0.762), (-75.421450769, 0.762))
            Line((-75.421450769, 0.762), (-73.511995363, 1.456984931))
            ThreePointArc((-73.511995363, 1.456984931), (-71.173530048, 2.339997211), (-70.093302846, 4.594157789))
            ThreePointArc((-70.093302846, 4.594157789), (-70.870061558, 6.970031654), (-73.073264748, 8.150720614))
            Line((-73.073264748, 8.150720614), (-74.875670761, 9.088993796))
            Line((-74.875670761, 9.088993796), (-74.676748844, 10.599955765))
            Line((-74.676748844, 10.599955765), (-72.692915357, 11.03976106))
            ThreePointArc((-72.692915357, 11.03976106), (-70.259199706, 11.609988074), (-68.893987001, 13.703866053))
            ThreePointArc((-68.893987001, 13.703866053), (-69.353986665, 16.160801344), (-71.384230312, 17.61896507))
            Line((-71.384230312, 17.61896507), (-73.048747266, 18.784472389))
            Line((-73.048747266, 18.784472389), (-72.654307042, 20.256543348))
            Line((-72.654307042, 20.256543348), (-70.630039415, 20.433643817))
            ThreePointArc((-70.630039415, 20.433643817), (-68.142714978, 20.681328823), (-66.515875937, 22.579097369))
            ThreePointArc((-66.515875937, 22.579097369), (-66.651245832, 25.075055243), (-68.473791905, 26.785744149))
            Line((-68.473791905, 26.785744149), (-69.971939453, 28.15854345))
            Line((-69.971939453, 28.15854345), (-69.388729902, 29.566535858))
            Line((-69.388729902, 29.566535858), (-67.358663916, 29.477901263))
            ThreePointArc((-67.358663916, 29.477901263), (-64.860289504, 29.398806302), (-62.999659794, 31.067994069))
            ThreePointArc((-62.999659794, 31.067994069), (-62.808083704, 33.560267995), (-64.391747933, 35.494211718))
            Line((-64.391747933, 35.494211718), (-65.697892356, 37.050814027))
            Line((-65.697892356, 37.050814027), (-64.935892356, 38.370636742))
            Line((-64.935892356, 38.370636742), (-62.934763002, 38.017783645))
            ThreePointArc((-62.934763002, 38.017783645), (-60.468086493, 37.613262053), (-58.405502006, 39.025308777))
            ThreePointArc((-58.405502006, 39.025308777), (-57.89025785, 41.471255256), (-59.207943302, 43.595363485))
            Line((-59.207943302, 43.595363485), (-60.299736106, 45.309134903))
            Line((-60.299736106, 45.309134903), (-59.371983688, 46.518205393))
            Line((-59.371983688, 46.518205393), (-57.434030844, 45.907171209))
            ThreePointArc((-57.434030844, 45.907171209), (-55.041257758, 45.184144463), (-52.812009885, 46.314889632))
            ThreePointArc((-52.812009885, 46.314889632), (-51.981913634, 48.672657842), (-53.011074345, 50.950586495))
            Line((-53.011074345, 50.950586495), (-53.869834653, 52.792203918))
            Line((-53.869834653, 52.792203918), (-52.792203918, 53.869834653))
            Line((-52.792203918, 53.869834653), (-50.950586495, 53.011074345))
            ThreePointArc((-50.950586495, 53.011074345), (-48.672657842, 51.981913634), (-46.314889632, 52.812009885))
            ThreePointArc((-46.314889632, 52.812009885), (-45.184144463, 55.041257758), (-45.907171209, 57.434030844))
            Line((-45.907171209, 57.434030844), (-46.518205393, 59.371983688))
            Line((-46.518205393, 59.371983688), (-45.309134903, 60.299736106))
            Line((-45.309134903, 60.299736106), (-43.595363485, 59.207943302))
            ThreePointArc((-43.595363485, 59.207943302), (-41.471255256, 57.89025785), (-39.025308777, 58.405502006))
            ThreePointArc((-39.025308777, 58.405502006), (-37.613262053, 60.468086493), (-38.017783645, 62.934763002))
            Line((-38.017783645, 62.934763002), (-38.370636742, 64.935892356))
            Line((-38.370636742, 64.935892356), (-37.050814027, 65.697892356))
            Line((-37.050814027, 65.697892356), (-35.494211718, 64.391747933))
            ThreePointArc((-35.494211718, 64.391747933), (-33.560267995, 62.808083704), (-31.067994069, 62.999659794))
            ThreePointArc((-31.067994069, 62.999659794), (-29.398806302, 64.860289504), (-29.477901263, 67.358663916))
            Line((-29.477901263, 67.358663916), (-29.566535858, 69.388729902))
            Line((-29.566535858, 69.388729902), (-28.15854345, 69.971939453))
            Line((-28.15854345, 69.971939453), (-26.785744149, 68.473791905))
            ThreePointArc((-26.785744149, 68.473791905), (-25.075055243, 66.651245832), (-22.579097369, 66.515875937))
            ThreePointArc((-22.579097369, 66.515875937), (-20.681328823, 68.142714978), (-20.433643817, 70.630039415))
            Line((-20.433643817, 70.630039415), (-20.256543348, 72.654307042))
            Line((-20.256543348, 72.654307042), (-18.784472389, 73.048747266))
            Line((-18.784472389, 73.048747266), (-17.61896507, 71.384230312))
            ThreePointArc((-17.61896507, 71.384230312), (-16.160801344, 69.353986665), (-13.703866053, 68.893987001))
            ThreePointArc((-13.703866053, 68.893987001), (-11.609988074, 70.259199706), (-11.03976106, 72.692915357))
            Line((-11.03976106, 72.692915357), (-10.599955765, 74.676748844))
            Line((-10.599955765, 74.676748844), (-9.088993796, 74.875670761))
            Line((-9.088993796, 74.875670761), (-8.150720614, 73.073264748))
            ThreePointArc((-8.150720614, 73.073264748), (-6.970031654, 70.870061558), (-4.594157789, 70.093302846))
            ThreePointArc((-4.594157789, 70.093302846), (-2.339997211, 71.173530048), (-1.456984931, 73.511995363))
            Line((-1.456984931, 73.511995363), (-0.762, 75.421450769))
        make_face()
        Circle(SKETCH1_R, mode=Mode.SUBTRACT)
    extrude(amount=BOSS_EXTRUDE2_DEPTH)

    # Sketch3 → Cut-Revolve3 (revolve, cut)
    with BuildSketch(Plane(origin=(0, 0, 0), x_dir=(0, 0, -1), z_dir=(1, 0, 0))):
        Polygon((-4.752293352, 76.364789012), (-4.752293352, 70.630039415), (-4.0894, 70.630039415), (-3.848714616, 73.457461189), (-3.3274, 75.421450769), (-3.3274, 76.364789012), align=None)
        Polygon((-0.762, 75.421450769), (-0.762, 76.364789012), (0.662893352, 76.364789012), (0.662893352, 70.630039415), (0, 70.630039415), (-0.240685384, 73.457461189), align=None)
    revolve(axis=Axis((0, 0, 4.0894), (0, 0, -1)), mode=Mode.SUBTRACT)


with BuildPart() as body_2:
    # Sketch4 → Boss-Extrude3 (new body)
    with BuildSketch(Plane.XY.offset(29.4894)):
        with Locations(Location((0, 0, 0), (0, 0, 180))):
            Circle(SKETCH4_R)
        with Locations(Location((0, 0, 0), (0, 0, 180))):
            Circle(SKETCH4_R_2, mode=Mode.SUBTRACT)
    extrude(amount=BOSS_EXTRUDE3_DEPTH)

    # Sketch5 → Boss-Extrude5 (add)
    with BuildSketch(Plane.XY.offset(33.2994).offset(BOSS_EXTRUDE5_START)):
        with BuildLine():
            Line((-45.305667206, 60.29752694), (-43.553929762, 59.152800496))
            ThreePointArc((-43.553929762, 59.152800496), (-39.025308777, 58.405502006), (-37.982694335, 62.875380996))
            Line((-37.982694335, 62.875380996), (-38.369922769, 64.931843211))
            ThreePointArc((-38.369922769, 64.931843211), (-41.901912978, 62.71064443), (-45.305667206, 60.29752694))
        make_face()
        with BuildLine():
            Line((60.29752694, 45.305667206), (59.152800496, 43.553929762))
            ThreePointArc((59.152800496, 43.553929762), (58.405502006, 39.025308777), (62.875380996, 37.982694335))
            Line((62.875380996, 37.982694335), (64.931843211, 38.369922769))
            ThreePointArc((64.931843211, 38.369922769), (62.71064443, 41.901912978), (60.29752694, 45.305667206))
        make_face()
        with BuildLine():
            Line((45.305667206, -60.29752694), (43.553929762, -59.152800496))
            ThreePointArc((43.553929762, -59.152800496), (39.025308777, -58.405502006), (37.982694335, -62.875380996))
            Line((37.982694335, -62.875380996), (38.369922769, -64.931843211))
            ThreePointArc((38.369922769, -64.931843211), (41.901912978, -62.71064443), (45.305667206, -60.29752694))
        make_face()
        with BuildLine():
            Line((-60.29752694, -45.305667206), (-59.152800496, -43.553929762))
            ThreePointArc((-59.152800496, -43.553929762), (-58.405502006, -39.025308777), (-62.875380996, -37.982694335))
            Line((-62.875380996, -37.982694335), (-64.931843211, -38.369922769))
            ThreePointArc((-64.931843211, -38.369922769), (-62.71064443, -41.901912978), (-60.29752694, -45.305667206))
        make_face()
    extrude(amount=BOSS_EXTRUDE5_DEPTH)

    # Sketch6 → Boss-Extrude6 (add)
    with BuildSketch(Plane.XY.offset(33.2994)):
        with Locations(Location((0, 0, 0), (0, 0, 180))):
            Circle(SKETCH6_R)
    extrude(amount=BOSS_EXTRUDE6_DEPTH)

    # Sketch8 → Boss-Extrude7 (add)
    with BuildSketch(Plane(origin=(0, 0, 33.2994), x_dir=(-1, 0, 0), z_dir=(0, 0, -1)).offset(BOSS_EXTRUDE7_START)):
        with Locations(Location((0, 0, 0), (0, 0, 180))):
            Circle(SKETCH8_R)
    extrude(amount=-BOSS_EXTRUDE7_DEPTH)

    # Sketch9 → Cut-Extrude2 (cut, through all)
    with BuildSketch(Plane(origin=(0, 0, 29.4894), x_dir=(-1, 0, 0), z_dir=(0, 0, -1))):
        with Locations((0, 27.94)):
            Circle(SKETCH9_R)
        with Locations((26.572519065, 8.633934823)):
            Circle(SKETCH9_R)
        with Locations((16.422719949, -22.603934823)):
            Circle(SKETCH9_R)
        with Locations((-16.422719949, -22.603934823)):
            Circle(SKETCH9_R)
        with Locations((-26.572519065, 8.633934823)):
            Circle(SKETCH9_R)
    extrude(amount=-CUT_EXTRUDE2_DEPTH, mode=Mode.SUBTRACT)


solid = body_2.part
